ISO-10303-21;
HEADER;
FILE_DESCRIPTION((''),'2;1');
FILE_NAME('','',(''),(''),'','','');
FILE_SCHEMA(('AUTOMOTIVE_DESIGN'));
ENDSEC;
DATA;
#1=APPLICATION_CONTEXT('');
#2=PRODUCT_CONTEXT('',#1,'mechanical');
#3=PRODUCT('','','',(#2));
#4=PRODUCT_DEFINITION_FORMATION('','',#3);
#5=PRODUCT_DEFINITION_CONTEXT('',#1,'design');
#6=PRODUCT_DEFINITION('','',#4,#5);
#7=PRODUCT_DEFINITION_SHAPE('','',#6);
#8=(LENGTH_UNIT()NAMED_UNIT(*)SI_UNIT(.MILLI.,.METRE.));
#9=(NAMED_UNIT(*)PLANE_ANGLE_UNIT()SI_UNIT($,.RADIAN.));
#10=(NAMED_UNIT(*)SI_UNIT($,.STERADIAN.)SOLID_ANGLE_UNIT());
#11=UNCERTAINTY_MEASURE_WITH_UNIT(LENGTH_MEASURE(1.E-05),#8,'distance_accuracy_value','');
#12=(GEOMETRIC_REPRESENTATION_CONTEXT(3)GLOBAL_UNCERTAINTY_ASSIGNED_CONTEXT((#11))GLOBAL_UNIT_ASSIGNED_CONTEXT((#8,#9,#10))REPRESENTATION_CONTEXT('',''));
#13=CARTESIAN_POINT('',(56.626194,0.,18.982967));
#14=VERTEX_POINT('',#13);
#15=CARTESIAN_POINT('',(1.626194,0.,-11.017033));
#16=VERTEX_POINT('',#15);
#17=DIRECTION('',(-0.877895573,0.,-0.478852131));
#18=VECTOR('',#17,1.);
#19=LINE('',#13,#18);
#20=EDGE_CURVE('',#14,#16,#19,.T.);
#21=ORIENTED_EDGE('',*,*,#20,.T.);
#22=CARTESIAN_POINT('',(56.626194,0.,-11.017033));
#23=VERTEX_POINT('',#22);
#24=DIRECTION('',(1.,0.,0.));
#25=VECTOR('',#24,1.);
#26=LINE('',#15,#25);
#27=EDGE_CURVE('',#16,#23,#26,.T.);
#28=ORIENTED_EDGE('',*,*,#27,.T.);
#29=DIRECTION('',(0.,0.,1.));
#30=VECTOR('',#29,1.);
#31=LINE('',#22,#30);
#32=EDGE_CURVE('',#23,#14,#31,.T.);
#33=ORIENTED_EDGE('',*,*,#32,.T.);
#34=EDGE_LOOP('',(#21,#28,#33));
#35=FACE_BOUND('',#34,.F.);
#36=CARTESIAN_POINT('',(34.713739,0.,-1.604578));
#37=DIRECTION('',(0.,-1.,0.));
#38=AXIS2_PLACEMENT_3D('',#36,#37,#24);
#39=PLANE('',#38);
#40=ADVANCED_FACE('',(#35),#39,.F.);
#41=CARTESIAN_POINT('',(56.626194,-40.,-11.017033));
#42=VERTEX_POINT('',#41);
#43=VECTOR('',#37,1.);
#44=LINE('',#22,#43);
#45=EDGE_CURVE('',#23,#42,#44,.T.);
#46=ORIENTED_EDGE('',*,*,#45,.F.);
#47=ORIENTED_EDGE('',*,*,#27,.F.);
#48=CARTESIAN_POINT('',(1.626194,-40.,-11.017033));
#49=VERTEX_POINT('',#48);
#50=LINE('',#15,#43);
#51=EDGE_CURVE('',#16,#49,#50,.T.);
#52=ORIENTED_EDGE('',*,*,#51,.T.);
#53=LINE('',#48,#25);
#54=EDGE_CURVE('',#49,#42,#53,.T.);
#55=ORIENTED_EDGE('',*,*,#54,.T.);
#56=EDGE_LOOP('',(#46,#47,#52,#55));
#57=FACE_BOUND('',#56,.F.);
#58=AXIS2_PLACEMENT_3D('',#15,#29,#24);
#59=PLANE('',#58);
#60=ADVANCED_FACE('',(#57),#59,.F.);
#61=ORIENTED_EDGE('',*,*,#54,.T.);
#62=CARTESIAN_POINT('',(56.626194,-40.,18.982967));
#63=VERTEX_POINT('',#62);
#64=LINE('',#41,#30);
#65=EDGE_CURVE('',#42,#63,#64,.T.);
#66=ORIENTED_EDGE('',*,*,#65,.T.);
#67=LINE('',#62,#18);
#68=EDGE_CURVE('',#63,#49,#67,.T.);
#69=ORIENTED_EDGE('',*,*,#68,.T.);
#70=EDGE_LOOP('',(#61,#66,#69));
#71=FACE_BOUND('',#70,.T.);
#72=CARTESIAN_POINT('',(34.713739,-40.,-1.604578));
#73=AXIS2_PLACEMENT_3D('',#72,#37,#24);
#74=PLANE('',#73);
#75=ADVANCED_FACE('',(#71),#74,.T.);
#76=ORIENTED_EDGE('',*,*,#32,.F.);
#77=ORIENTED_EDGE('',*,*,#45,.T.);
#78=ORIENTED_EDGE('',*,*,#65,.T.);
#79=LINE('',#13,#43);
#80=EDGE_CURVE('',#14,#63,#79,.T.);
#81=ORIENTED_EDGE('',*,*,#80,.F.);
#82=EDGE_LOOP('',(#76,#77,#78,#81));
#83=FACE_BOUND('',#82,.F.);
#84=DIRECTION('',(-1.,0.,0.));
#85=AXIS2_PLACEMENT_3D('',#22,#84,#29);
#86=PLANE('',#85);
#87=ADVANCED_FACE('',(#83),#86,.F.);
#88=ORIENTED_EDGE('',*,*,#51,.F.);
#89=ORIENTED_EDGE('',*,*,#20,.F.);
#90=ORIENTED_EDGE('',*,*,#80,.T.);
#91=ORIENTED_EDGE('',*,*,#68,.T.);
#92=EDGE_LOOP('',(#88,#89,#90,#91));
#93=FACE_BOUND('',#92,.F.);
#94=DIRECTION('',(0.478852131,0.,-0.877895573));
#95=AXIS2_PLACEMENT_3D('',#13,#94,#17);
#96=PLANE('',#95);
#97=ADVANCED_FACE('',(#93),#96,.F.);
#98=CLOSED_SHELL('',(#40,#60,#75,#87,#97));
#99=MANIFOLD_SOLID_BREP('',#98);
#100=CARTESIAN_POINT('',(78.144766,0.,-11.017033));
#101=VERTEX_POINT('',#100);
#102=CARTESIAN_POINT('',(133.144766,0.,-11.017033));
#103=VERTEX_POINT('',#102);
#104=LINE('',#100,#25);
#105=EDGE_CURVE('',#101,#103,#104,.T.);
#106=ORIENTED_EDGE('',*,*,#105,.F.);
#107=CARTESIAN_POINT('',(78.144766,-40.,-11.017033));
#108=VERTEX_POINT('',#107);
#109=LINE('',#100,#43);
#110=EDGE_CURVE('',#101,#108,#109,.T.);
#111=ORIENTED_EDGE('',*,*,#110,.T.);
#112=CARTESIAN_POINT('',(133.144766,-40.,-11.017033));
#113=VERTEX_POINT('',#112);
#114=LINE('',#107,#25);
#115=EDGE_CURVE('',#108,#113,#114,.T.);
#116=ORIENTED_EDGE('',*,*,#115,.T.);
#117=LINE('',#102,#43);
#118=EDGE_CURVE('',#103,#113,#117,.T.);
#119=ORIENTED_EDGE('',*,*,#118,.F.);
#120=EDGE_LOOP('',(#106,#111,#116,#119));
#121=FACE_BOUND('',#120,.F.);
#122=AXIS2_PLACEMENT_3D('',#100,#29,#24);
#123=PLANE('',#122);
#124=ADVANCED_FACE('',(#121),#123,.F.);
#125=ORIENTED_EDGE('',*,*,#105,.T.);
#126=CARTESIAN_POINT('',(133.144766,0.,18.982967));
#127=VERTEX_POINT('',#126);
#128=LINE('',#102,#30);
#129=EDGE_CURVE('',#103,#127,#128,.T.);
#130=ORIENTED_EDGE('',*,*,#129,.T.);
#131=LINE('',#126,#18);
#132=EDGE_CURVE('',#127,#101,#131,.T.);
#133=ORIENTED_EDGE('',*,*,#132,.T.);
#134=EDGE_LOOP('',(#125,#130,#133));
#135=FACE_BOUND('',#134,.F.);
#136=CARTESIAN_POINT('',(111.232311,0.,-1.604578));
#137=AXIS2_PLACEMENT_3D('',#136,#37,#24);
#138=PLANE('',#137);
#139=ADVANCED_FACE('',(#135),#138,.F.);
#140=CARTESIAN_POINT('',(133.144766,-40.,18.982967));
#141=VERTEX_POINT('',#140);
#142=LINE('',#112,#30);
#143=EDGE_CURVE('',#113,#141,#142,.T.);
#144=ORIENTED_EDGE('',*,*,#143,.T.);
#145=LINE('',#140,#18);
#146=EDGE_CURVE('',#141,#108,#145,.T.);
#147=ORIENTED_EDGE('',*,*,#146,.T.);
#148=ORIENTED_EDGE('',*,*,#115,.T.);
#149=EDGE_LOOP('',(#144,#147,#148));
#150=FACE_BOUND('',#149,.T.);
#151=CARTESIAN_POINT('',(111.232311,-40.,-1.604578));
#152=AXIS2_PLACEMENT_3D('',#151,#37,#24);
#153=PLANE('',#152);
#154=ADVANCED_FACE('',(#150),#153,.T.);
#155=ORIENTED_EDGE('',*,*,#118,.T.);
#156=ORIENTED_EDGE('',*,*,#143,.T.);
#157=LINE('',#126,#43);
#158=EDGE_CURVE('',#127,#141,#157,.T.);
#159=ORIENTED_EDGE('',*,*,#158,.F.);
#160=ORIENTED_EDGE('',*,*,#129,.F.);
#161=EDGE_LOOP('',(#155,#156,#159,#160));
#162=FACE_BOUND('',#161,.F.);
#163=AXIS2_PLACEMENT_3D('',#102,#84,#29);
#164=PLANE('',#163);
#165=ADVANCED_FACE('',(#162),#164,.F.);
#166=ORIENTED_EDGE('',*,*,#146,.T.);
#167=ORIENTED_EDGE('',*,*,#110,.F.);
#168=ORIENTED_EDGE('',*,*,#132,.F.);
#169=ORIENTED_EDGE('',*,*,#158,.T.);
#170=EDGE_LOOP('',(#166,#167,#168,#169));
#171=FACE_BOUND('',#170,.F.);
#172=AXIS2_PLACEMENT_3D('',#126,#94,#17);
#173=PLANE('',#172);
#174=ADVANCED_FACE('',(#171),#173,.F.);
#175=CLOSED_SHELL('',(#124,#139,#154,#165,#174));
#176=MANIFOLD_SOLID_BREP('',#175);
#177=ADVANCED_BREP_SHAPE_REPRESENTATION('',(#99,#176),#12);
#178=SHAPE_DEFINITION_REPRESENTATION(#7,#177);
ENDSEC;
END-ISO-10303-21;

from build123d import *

# Parameters (mm, degrees)
F1_DEPTH = 40


# Not quite as in the source:
# - a feature names something its author has since deleted; it is built from what else it names


with BuildPart() as f1:
    # F0 (on Front) → F1 (new body)
    with BuildSketch(Plane.XZ):
        Polygon((56.6261941055, -11.017032899), (56.6261941055, 18.982967101), (1.6261941055, -11.017032899), align=None)
    extrude(amount=F1_DEPTH)


with BuildPart() as f1b:
    # F0 (on Front) → F1, piece 2 (new body)
    with BuildSketch(Plane.XZ):
        Polygon((133.1447663903, 18.982967101), (78.1447663903, -11.017032899), (133.1447663903, -11.017032899), align=None)
    extrude(amount=F1_DEPTH)


solid = Compound([f1.part, f1b.part])
